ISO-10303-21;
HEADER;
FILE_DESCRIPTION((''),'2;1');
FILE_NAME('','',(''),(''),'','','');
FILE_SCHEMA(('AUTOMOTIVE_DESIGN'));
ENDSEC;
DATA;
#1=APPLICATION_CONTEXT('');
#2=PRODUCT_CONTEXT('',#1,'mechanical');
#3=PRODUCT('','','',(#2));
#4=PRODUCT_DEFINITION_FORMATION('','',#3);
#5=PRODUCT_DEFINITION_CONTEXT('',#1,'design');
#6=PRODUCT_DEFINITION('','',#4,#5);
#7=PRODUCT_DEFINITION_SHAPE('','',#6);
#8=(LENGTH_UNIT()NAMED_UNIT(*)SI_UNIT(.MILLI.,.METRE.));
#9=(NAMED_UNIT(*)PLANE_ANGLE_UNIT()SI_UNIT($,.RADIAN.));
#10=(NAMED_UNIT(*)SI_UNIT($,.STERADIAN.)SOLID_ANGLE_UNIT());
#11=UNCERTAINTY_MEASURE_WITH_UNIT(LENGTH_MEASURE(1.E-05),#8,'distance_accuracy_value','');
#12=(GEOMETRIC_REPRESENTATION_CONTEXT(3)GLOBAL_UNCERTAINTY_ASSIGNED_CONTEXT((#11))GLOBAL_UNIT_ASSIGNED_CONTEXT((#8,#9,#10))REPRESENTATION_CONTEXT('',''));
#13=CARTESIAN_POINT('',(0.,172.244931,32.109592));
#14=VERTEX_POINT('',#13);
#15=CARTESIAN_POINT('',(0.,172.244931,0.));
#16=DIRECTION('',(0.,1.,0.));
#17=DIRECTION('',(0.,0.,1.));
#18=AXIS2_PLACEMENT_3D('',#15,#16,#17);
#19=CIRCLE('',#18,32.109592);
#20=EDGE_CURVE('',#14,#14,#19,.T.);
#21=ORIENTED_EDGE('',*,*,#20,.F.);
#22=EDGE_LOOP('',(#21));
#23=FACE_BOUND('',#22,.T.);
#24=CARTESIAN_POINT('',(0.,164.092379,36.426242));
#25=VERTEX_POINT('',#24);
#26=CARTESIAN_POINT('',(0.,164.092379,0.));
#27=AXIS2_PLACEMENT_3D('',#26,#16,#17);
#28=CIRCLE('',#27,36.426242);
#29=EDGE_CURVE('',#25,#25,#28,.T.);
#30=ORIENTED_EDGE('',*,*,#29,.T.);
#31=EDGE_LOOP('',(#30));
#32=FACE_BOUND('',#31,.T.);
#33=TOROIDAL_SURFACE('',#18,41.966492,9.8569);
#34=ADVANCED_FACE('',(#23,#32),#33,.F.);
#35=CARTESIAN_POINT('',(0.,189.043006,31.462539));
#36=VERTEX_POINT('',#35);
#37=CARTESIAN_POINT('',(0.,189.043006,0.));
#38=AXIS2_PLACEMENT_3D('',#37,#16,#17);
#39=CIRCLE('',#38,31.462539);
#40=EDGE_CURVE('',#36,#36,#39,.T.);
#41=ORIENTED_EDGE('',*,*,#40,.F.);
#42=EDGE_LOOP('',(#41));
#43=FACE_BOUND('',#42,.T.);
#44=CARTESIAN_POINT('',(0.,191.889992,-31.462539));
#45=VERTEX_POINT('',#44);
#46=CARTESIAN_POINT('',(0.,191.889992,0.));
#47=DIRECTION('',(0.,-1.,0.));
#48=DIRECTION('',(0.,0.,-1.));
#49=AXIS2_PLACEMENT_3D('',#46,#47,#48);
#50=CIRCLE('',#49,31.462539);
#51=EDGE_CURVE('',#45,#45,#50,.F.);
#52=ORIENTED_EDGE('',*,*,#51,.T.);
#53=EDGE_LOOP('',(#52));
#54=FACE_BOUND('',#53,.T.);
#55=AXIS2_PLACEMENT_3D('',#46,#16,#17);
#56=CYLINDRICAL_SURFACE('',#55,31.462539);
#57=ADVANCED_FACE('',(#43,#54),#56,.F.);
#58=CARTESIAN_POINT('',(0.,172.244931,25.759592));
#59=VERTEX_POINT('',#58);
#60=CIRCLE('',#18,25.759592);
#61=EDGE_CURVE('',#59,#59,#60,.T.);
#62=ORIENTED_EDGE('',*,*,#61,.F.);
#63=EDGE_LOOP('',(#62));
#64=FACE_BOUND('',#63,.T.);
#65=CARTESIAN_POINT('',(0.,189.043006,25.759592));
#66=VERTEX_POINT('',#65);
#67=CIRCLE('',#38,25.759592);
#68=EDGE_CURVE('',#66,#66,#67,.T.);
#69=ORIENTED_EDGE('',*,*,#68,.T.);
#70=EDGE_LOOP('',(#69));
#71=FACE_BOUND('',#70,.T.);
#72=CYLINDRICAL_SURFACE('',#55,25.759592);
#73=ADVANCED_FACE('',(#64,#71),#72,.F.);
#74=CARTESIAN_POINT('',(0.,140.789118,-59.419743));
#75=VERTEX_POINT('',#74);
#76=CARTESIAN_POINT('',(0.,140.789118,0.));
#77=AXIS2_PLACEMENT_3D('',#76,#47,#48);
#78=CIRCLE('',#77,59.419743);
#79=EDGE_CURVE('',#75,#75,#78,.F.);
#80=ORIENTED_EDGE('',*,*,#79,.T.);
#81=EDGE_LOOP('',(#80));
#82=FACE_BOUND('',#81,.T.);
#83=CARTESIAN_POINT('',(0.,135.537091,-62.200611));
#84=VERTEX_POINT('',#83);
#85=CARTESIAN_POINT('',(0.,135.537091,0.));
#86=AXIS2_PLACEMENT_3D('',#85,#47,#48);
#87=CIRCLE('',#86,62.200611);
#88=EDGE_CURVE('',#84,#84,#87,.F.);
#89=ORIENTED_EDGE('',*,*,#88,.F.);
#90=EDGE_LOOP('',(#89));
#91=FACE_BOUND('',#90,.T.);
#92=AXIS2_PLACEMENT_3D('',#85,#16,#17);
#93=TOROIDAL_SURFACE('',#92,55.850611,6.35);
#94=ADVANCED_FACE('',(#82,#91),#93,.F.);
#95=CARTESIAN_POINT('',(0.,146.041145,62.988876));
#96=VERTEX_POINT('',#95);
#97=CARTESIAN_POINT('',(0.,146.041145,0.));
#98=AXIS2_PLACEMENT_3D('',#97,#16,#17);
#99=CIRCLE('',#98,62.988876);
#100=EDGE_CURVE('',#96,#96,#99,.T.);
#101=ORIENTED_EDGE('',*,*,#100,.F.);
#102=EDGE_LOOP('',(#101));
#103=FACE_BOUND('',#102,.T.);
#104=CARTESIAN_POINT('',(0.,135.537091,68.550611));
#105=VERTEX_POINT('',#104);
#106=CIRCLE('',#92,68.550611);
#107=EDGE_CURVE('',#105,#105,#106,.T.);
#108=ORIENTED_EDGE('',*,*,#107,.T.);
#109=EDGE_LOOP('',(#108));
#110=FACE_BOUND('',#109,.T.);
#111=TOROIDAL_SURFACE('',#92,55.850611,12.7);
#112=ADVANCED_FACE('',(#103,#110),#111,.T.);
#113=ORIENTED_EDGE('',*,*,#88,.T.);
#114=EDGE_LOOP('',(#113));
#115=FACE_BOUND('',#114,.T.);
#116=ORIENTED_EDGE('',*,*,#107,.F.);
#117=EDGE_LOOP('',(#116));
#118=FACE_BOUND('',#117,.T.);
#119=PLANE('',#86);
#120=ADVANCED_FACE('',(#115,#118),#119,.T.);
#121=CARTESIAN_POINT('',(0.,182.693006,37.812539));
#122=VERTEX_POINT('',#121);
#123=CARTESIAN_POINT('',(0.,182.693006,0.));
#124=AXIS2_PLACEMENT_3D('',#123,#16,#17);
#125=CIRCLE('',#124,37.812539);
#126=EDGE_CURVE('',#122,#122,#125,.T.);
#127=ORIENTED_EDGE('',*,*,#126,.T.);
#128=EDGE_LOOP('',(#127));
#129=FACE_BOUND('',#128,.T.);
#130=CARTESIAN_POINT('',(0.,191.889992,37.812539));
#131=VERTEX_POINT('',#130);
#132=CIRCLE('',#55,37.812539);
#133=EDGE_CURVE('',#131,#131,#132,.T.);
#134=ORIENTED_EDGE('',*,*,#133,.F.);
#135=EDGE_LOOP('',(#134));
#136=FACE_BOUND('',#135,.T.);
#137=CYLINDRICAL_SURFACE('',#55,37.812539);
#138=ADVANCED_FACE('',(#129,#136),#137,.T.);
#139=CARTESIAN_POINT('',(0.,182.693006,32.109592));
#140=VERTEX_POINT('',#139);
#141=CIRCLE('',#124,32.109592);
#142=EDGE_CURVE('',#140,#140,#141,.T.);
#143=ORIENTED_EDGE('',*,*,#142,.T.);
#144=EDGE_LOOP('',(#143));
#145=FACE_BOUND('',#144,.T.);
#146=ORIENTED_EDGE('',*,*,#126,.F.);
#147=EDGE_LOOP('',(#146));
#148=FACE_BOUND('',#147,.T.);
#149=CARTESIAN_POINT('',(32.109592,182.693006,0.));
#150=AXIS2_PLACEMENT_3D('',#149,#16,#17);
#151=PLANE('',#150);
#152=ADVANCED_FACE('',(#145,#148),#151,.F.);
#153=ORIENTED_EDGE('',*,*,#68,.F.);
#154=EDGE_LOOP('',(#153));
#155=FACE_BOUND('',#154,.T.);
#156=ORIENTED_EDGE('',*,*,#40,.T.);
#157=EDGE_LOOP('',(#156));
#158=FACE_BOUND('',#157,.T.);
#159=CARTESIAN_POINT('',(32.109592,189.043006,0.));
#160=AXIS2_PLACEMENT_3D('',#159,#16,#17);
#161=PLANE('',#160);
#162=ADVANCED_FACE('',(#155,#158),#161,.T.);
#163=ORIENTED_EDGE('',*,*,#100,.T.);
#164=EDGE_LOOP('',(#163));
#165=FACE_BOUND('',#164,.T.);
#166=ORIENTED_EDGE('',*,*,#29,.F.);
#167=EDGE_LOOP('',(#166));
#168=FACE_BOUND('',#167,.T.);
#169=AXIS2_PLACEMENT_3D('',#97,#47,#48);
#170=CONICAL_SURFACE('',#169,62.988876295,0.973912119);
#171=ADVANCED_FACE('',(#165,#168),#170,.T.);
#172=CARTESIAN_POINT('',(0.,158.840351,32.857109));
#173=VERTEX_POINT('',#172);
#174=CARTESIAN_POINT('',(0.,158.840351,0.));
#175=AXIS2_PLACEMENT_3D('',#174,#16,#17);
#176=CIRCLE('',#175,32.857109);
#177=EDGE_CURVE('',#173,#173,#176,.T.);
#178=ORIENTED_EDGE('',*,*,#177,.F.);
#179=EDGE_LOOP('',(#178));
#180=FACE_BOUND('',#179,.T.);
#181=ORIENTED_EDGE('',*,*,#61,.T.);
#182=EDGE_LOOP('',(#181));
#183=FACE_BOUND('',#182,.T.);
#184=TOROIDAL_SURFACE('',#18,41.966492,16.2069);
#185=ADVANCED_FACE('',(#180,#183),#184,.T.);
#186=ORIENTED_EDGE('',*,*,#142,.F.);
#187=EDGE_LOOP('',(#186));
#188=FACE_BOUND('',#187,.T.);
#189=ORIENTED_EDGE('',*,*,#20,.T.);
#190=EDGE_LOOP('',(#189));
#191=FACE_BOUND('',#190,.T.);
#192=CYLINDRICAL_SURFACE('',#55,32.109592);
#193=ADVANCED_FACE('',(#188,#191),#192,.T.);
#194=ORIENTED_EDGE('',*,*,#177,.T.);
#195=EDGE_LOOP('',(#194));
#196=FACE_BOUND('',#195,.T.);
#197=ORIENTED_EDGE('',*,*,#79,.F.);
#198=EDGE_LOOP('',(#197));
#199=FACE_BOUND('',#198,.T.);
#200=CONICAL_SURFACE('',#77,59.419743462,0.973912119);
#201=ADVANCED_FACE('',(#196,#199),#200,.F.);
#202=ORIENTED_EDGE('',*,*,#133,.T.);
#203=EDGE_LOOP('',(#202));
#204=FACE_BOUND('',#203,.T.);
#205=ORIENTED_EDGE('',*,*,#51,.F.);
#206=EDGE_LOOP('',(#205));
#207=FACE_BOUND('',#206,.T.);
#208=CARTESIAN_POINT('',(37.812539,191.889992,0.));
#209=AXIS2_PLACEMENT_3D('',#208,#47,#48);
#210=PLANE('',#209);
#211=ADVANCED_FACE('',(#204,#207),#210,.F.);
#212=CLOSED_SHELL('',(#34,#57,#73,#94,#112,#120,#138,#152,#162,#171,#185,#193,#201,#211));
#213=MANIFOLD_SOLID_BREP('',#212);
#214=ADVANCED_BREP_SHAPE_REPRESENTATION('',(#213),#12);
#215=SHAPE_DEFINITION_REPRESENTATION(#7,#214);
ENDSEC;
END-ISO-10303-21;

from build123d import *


# Read off the part's stored shape, not the designer's step: Shell1
with BuildPart() as part:
    # Sketch1 → Revolve1 (revolve)
    with BuildSketch(Plane.XY, mode=Mode.PRIVATE) as revolve1_sk:
        with BuildLine():
            Line((0, 0), (55.850610629, 0))
            ThreePointArc((55.850610629, 0), (64.83086675, 3.719743879), (68.550610629, 12.7))
            Line((68.550610629, 12.7), (68.550610629, 135.537090781))
            ThreePointArc((68.550610629, 135.537090781), (67.07437947, 141.479902659), (62.988876295, 146.041145392))
            Line((62.988876295, 146.041145392), (36.426242146, 164.092378593))
            ThreePointArc((36.426242146, 164.092378593), (33.255344861, 167.632513451), (32.109591896, 172.244930881))
            Line((32.109591896, 172.244930881), (32.109591896, 182.693006016))
            Line((32.109591896, 182.693006016), (37.812538782, 182.693006016))
            Line((37.812538782, 182.693006016), (37.812538782, 191.889991998))
            Line((37.812538782, 191.889991998), (0, 191.889991998))
            Line((0, 191.889991998), (0, 0))
        make_face()
    revolve(revolve1_sk.sketch.rotate(Axis((0, 191.889991998, 0), (0, -1, 0)), 90), axis=Axis((0, 191.889991998, 0), (0, -1, 0)))

    # Shell1 outline → Shell1 (revolve, cut)
    with BuildSketch(Plane.XY):
        with BuildLine():
            Line((68.550610629, 135.537090781), (62.200610629, 135.537090781))
            ThreePointArc((62.200610629, 135.537090781), (61.462495049, 138.50849672), (59.419743462, 140.789118087))
            Line((59.419743462, 140.789118087), (32.857109313, 158.840351287))
            ThreePointArc((32.857109313, 158.840351287), (27.643460441, 164.661107512), (25.759591896, 172.244930881))
            Line((25.759591896, 172.244930881), (25.759591896, 189.043006016))
            Line((25.759591896, 189.043006016), (31.462538782, 189.043006016))
            Line((31.462538782, 189.043006016), (31.462538782, 191.889991998))
            Line((31.462538782, 191.889991998), (0, 191.889991998))
            Line((0, 191.889991998), (0, 0))
            Line((0, 0), (55.850610629, 0))
            ThreePointArc((55.850610629, 0), (64.83086675, 3.719743879), (68.550610629, 12.7))
            Line((68.550610629, 12.7), (68.550610629, 135.537090781))
        make_face()
    revolve(axis=Axis((0, 0, 0), (0, 1, 0)), mode=Mode.SUBTRACT)


solid = part.part
